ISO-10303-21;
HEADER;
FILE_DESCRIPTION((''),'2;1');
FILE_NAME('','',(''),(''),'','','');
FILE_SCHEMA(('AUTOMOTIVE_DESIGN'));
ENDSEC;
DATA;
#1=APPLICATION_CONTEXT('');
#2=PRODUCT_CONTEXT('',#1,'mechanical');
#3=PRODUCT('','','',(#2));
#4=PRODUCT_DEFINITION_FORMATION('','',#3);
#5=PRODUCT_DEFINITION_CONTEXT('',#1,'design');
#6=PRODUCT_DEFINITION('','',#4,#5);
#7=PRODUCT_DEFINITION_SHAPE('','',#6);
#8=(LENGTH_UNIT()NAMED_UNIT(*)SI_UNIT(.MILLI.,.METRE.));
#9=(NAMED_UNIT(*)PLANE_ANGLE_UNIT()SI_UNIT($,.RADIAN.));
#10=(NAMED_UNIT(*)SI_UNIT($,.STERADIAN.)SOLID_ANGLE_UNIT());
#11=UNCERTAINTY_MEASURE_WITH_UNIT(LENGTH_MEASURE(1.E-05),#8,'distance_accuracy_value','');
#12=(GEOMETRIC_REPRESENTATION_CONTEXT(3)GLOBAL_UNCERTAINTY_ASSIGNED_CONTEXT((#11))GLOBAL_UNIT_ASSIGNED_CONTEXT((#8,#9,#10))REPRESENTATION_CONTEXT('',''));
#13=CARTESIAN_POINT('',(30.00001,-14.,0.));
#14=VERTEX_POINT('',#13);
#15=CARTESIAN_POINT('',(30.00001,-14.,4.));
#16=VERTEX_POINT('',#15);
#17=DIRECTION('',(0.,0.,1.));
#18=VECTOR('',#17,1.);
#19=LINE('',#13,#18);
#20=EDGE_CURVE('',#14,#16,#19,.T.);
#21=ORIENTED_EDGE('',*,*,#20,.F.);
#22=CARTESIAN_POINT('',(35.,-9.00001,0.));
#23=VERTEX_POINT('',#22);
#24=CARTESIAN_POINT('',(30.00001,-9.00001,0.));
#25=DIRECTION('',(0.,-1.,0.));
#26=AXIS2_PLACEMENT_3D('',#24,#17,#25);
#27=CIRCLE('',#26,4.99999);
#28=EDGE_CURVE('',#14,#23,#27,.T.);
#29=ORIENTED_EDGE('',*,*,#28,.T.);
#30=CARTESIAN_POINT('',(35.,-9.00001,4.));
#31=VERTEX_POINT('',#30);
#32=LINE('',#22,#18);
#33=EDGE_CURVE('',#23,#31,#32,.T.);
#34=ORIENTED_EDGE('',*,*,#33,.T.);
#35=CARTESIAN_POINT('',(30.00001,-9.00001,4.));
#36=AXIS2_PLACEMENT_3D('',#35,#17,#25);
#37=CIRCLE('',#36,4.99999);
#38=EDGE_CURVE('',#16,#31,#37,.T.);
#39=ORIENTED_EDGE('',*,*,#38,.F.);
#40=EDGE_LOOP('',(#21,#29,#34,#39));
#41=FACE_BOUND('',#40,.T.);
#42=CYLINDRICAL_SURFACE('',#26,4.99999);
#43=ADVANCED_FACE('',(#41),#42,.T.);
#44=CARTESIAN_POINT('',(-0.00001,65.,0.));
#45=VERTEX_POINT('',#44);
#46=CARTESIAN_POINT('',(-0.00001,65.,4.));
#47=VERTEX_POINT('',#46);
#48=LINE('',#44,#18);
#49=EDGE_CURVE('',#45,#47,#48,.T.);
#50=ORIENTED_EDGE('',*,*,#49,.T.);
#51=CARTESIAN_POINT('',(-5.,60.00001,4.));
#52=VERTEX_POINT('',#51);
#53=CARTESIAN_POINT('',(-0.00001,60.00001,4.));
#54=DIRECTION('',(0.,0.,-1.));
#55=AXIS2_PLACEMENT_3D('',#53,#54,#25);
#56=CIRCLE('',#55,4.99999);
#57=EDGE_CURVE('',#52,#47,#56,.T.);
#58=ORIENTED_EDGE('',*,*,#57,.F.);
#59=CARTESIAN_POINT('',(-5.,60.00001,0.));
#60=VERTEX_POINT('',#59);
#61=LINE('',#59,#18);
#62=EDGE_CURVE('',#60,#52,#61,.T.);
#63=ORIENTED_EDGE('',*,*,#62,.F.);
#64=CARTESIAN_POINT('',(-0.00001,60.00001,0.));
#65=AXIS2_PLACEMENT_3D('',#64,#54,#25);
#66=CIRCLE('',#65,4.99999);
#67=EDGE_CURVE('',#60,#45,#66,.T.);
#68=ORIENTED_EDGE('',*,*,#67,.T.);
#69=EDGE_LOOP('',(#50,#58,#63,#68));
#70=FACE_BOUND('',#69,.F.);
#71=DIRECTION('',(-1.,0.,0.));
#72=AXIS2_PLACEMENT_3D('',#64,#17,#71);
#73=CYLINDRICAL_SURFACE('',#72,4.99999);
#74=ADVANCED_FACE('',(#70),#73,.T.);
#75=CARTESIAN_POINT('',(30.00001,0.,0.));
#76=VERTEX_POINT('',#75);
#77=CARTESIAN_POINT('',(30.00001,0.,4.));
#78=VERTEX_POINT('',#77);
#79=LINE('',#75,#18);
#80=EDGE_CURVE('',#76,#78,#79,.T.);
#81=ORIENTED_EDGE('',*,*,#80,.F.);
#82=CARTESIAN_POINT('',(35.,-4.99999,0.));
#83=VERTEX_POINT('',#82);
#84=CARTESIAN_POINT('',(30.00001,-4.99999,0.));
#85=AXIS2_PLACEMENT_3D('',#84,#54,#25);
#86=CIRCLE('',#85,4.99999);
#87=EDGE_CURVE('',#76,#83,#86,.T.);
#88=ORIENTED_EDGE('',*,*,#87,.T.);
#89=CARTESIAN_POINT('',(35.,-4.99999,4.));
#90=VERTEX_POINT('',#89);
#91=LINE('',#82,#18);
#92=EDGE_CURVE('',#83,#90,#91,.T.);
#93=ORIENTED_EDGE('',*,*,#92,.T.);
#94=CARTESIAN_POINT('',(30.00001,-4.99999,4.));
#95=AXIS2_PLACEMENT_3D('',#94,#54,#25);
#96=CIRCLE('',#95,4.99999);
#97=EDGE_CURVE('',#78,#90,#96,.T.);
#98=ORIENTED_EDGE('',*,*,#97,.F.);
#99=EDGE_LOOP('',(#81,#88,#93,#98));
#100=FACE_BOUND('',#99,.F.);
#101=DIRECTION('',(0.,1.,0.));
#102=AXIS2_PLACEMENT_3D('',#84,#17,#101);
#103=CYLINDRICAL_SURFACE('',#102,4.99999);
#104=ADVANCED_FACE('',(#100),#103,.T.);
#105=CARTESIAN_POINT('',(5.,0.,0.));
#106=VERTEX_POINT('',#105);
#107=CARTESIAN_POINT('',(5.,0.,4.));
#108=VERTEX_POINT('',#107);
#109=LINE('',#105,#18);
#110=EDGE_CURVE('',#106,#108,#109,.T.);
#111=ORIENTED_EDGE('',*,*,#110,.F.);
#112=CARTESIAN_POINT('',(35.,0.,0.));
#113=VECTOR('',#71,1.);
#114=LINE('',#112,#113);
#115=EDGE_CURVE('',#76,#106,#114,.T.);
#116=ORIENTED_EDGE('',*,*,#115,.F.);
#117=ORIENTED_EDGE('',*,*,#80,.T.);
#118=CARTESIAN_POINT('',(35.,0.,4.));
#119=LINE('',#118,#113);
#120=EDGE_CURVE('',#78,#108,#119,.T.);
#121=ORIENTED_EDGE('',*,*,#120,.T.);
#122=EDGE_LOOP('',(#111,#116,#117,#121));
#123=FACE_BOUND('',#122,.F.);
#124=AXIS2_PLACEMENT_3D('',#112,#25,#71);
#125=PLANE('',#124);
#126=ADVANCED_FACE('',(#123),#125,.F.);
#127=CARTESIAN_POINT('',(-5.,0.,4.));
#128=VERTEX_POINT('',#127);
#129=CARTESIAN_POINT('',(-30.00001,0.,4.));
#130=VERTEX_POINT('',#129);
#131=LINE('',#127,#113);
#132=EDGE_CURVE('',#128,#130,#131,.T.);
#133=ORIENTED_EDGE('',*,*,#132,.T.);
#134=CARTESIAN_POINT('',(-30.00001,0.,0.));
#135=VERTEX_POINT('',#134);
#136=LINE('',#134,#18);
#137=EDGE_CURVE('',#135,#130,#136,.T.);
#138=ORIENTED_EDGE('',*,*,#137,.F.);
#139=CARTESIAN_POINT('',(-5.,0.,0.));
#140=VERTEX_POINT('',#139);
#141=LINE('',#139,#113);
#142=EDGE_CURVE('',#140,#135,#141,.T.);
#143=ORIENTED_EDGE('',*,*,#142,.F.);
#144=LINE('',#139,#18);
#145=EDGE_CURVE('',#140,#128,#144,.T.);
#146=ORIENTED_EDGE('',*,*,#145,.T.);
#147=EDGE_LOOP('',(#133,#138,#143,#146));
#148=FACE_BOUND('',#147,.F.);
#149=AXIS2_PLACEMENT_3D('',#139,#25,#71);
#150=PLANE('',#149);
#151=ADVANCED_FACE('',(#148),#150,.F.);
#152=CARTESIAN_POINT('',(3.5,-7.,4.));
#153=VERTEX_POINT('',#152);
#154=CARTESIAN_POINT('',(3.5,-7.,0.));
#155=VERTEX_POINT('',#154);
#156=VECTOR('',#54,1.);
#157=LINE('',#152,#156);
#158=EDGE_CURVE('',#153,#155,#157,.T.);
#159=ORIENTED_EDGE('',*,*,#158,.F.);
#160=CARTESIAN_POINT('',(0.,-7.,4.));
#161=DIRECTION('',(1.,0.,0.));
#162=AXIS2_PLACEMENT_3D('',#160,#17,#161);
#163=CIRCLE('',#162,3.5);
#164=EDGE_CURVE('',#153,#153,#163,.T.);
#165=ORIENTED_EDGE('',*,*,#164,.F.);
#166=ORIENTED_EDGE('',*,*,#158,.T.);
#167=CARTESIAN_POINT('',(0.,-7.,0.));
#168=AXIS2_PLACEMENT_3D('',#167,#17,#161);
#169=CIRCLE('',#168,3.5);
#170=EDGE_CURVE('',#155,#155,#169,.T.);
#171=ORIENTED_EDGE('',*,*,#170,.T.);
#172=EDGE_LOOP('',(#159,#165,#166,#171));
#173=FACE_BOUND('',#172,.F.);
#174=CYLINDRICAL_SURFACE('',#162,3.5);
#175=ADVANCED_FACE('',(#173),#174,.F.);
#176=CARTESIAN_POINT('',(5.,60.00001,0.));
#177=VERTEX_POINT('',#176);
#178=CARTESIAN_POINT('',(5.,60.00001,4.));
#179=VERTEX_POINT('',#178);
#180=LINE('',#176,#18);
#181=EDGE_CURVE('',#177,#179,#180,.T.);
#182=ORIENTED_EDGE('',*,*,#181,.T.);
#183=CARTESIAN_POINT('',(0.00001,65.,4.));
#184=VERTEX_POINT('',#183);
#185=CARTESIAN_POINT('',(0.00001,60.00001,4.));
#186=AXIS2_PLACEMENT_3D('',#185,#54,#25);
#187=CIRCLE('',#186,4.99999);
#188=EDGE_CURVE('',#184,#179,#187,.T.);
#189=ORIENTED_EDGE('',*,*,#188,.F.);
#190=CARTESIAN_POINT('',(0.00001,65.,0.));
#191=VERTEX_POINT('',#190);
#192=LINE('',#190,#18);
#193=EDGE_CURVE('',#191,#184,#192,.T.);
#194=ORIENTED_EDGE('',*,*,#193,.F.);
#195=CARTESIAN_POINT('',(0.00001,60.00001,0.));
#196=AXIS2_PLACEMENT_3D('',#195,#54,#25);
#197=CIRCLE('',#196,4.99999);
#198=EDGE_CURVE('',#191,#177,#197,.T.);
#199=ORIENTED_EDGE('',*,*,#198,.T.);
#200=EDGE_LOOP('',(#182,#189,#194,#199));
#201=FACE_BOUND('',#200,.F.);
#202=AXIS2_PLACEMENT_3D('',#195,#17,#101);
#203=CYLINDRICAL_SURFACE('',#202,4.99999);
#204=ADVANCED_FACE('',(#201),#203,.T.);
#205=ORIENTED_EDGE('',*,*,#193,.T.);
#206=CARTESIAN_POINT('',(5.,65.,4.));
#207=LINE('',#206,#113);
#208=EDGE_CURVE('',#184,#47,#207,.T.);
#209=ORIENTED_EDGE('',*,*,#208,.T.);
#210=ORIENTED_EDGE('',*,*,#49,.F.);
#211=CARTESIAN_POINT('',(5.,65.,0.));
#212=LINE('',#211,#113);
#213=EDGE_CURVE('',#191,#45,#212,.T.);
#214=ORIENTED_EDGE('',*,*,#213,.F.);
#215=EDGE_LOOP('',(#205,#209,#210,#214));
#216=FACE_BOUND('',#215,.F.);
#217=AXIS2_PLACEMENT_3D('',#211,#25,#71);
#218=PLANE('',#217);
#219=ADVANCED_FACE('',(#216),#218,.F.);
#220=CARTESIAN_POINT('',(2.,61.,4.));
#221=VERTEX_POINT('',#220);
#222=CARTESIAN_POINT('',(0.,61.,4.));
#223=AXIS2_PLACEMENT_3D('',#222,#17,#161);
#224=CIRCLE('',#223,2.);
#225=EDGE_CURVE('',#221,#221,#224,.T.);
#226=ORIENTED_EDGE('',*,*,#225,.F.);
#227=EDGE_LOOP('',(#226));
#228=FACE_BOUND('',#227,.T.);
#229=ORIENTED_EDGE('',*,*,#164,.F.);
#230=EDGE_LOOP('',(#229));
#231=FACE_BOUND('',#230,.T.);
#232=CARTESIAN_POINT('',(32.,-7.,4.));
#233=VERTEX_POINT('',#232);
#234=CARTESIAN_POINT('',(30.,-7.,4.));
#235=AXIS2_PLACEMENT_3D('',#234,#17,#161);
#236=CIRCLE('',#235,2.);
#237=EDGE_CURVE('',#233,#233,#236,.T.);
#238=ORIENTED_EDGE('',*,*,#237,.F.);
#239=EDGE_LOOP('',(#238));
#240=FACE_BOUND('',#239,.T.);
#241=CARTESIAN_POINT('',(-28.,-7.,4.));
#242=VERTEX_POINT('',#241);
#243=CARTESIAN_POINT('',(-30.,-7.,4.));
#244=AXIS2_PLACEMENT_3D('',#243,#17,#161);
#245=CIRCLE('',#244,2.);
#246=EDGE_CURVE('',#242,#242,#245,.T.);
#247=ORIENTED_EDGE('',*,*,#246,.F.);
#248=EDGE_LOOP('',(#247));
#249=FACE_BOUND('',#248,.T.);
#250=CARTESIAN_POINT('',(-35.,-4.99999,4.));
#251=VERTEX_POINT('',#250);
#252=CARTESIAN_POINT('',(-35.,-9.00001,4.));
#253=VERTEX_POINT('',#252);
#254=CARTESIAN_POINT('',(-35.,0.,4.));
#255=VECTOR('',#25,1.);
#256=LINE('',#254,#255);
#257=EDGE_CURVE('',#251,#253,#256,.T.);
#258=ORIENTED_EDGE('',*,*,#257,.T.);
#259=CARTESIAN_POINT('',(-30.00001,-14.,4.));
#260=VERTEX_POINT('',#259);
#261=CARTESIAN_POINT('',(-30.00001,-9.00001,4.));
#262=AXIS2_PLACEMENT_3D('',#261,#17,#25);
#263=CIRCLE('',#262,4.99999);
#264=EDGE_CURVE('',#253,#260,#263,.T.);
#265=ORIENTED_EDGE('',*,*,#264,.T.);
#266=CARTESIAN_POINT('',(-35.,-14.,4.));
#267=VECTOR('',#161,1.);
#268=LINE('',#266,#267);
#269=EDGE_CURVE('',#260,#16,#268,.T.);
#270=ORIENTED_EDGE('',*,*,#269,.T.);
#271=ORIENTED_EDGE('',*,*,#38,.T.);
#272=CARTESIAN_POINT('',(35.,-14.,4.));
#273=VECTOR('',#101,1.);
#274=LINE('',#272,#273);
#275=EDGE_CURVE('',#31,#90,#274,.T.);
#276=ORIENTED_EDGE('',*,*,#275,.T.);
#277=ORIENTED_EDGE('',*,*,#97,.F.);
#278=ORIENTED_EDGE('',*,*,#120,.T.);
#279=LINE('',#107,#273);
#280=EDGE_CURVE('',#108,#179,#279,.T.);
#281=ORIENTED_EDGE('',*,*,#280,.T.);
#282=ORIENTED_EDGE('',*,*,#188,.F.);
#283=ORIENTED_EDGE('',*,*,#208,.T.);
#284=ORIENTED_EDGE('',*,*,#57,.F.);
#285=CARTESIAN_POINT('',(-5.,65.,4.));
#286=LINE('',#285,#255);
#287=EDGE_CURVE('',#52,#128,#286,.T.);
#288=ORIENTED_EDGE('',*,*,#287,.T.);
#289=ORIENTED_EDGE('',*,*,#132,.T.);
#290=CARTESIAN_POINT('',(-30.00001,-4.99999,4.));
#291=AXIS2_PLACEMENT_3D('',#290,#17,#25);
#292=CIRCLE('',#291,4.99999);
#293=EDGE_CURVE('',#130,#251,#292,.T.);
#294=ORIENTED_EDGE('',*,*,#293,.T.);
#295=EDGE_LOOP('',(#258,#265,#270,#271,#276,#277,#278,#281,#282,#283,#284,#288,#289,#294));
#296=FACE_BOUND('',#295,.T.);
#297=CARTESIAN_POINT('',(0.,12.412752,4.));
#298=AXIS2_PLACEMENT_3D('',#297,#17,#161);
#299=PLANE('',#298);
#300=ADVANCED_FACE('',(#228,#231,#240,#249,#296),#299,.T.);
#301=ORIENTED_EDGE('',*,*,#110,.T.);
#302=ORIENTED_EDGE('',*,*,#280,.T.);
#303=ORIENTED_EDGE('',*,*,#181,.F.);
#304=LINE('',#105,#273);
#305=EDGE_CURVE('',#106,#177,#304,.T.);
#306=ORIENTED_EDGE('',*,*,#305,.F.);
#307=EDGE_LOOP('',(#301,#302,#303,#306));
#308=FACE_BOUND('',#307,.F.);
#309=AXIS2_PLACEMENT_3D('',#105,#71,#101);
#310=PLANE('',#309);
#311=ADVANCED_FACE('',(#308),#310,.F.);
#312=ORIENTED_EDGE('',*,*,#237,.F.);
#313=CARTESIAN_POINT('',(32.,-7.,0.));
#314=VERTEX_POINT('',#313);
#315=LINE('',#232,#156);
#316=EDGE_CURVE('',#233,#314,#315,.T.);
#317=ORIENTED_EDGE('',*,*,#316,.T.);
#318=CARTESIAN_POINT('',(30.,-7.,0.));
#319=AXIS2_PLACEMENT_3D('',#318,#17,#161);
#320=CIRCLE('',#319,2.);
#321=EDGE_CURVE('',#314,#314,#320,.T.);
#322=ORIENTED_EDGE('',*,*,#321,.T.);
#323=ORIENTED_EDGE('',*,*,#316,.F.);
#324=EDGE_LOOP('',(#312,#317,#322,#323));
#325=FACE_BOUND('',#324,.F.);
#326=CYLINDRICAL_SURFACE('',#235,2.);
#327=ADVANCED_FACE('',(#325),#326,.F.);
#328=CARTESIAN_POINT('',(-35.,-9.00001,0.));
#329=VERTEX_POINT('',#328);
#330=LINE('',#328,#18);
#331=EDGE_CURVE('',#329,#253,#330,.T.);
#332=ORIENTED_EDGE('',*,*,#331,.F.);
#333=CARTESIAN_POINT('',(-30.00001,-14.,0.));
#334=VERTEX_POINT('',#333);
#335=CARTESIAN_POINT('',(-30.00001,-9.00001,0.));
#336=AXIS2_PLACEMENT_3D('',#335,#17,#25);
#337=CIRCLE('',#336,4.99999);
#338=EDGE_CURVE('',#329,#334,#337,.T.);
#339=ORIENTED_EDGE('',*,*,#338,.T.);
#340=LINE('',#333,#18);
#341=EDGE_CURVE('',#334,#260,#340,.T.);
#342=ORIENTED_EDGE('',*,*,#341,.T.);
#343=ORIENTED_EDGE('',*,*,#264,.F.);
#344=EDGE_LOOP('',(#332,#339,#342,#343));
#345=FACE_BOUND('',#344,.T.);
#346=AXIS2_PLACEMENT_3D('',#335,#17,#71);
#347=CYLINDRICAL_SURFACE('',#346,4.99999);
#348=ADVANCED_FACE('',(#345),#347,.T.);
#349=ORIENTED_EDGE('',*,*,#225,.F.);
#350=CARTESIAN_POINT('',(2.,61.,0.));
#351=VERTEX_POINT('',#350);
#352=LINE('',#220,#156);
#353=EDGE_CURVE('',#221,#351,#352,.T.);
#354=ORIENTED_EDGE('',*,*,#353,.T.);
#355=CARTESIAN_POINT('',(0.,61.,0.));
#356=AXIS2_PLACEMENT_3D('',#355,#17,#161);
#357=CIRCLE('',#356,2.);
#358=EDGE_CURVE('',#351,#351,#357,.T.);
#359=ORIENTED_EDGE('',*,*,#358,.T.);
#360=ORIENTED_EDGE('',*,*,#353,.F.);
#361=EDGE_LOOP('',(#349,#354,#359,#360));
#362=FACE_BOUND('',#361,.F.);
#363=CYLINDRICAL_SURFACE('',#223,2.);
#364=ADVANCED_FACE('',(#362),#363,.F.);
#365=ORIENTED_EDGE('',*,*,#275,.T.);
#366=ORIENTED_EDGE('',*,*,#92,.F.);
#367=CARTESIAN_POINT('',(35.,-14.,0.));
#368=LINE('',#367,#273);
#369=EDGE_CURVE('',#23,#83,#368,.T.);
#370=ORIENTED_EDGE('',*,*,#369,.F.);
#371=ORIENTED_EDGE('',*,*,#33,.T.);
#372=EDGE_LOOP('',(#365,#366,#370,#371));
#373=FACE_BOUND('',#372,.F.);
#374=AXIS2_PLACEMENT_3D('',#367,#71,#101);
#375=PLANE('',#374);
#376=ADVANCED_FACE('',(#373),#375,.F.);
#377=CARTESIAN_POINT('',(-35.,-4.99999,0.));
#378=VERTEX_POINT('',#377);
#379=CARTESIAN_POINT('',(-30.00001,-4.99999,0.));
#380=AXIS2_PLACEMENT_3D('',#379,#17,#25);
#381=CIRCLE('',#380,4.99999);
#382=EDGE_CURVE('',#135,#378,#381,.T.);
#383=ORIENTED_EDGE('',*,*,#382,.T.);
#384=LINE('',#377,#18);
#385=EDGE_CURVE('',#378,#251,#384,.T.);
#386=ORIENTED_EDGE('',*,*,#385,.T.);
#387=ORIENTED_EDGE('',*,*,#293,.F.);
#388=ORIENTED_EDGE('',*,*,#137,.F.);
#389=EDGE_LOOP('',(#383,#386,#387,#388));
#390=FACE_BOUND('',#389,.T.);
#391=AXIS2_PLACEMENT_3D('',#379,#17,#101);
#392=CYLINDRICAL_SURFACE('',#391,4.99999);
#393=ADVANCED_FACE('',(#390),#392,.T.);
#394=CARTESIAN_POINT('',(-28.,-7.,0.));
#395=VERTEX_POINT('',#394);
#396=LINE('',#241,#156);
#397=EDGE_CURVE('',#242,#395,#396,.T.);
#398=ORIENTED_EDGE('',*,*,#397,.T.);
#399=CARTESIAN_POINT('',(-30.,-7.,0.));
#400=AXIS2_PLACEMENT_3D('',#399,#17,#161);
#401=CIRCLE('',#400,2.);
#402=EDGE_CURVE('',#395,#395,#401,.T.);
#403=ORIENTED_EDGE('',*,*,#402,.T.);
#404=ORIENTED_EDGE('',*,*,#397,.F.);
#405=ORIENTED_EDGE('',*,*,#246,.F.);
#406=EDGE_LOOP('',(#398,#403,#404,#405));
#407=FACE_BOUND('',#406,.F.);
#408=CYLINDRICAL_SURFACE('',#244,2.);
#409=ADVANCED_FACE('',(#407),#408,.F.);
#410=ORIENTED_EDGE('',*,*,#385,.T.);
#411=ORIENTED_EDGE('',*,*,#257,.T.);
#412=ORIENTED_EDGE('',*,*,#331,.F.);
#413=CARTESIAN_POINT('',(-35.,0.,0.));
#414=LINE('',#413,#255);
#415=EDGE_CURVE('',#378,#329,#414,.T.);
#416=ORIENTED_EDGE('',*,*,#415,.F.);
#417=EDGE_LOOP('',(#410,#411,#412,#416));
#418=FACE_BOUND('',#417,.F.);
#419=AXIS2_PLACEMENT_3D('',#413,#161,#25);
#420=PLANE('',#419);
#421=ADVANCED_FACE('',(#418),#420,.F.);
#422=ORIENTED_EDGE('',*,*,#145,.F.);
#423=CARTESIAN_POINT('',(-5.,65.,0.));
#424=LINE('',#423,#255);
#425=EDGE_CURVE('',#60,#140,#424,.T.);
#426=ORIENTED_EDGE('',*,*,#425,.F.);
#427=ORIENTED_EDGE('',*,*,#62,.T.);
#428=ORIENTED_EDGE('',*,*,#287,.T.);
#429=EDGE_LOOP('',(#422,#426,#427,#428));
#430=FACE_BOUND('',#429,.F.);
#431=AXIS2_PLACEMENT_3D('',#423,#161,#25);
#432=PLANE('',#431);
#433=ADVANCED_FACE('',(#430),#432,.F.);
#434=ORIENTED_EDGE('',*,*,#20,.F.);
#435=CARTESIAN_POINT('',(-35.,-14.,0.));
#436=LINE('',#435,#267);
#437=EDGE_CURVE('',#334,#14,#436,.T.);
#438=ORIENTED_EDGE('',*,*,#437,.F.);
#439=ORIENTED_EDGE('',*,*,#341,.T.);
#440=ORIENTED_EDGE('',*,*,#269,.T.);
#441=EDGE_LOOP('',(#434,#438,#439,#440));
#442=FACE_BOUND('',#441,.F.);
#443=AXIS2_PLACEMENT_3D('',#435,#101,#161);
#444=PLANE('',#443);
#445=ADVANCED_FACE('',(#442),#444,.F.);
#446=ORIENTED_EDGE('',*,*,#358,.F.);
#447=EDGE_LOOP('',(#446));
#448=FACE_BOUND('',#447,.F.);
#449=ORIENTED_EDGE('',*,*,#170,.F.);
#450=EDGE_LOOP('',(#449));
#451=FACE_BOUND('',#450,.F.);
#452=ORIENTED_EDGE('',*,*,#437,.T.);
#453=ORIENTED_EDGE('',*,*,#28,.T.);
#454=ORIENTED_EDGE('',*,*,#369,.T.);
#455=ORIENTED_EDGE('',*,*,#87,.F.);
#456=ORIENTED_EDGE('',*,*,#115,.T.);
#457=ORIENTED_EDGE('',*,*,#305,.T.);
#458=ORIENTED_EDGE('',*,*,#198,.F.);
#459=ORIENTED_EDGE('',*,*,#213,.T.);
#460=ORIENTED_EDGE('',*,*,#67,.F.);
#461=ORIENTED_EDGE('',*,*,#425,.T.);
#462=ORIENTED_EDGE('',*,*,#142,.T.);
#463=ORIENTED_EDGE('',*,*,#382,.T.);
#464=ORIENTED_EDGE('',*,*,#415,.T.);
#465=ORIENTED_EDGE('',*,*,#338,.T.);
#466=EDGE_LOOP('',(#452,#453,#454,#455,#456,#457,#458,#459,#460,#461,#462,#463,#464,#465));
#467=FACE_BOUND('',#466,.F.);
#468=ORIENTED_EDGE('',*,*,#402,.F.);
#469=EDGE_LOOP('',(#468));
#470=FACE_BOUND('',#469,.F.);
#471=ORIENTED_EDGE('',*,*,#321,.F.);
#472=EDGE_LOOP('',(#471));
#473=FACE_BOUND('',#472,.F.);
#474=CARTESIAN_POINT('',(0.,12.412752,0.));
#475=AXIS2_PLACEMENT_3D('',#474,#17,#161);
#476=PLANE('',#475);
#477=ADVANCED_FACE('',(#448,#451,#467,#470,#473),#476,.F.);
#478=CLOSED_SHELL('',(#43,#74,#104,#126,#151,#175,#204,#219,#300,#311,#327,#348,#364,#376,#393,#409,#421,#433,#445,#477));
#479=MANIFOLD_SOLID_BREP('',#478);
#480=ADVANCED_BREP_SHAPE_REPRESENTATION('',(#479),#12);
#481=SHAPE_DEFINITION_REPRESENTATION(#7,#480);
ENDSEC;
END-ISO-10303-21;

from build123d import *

# Parameters (mm, degrees)
F1_DEPTH = 4
F2_R     = 2
F2_R_2   = 3.5
F3_DEPTH = 25
F4_R     = 4.99999


# Not quite as in the source:
# - a fillet or chamfer is up to 0.001 mm smaller than in the source, because OpenCascade refuses the exact size


with BuildPart() as f1:
    # F0 (on Top) → F1 (new body)
    with BuildSketch(Plane.XY):
        Polygon((-5, 65), (-5, 0), (-35, 0), (-35, -14), (35, -14), (35, 0), (5, 0), (5, 65), align=None)
    extrude(amount=F1_DEPTH)

    # F2 (on face) → F3 (cut)
    with BuildSketch(Plane.XY.offset(4)):
        with Locations((-30, -7)):
            Circle(F2_R)
        with Locations((30, -7)):
            Circle(F2_R)
        with Locations((0, -7)):
            Circle(F2_R_2)
        with Locations((0, 61)):
            Circle(F2_R)
    extrude(amount=-F3_DEPTH, mode=Mode.SUBTRACT)

    # F4 (radius 5 in the source; OpenCascade refuses exactly that, so slightly less here)
    f4_edges = [f1.edges().sort_by_distance(p)[0] for p in [
        (-35, -14, 2),
        (-35, 0, 2),
        (35, -14, 2),
        (35, 0, 2),
        (5, 65, 2),
        (-5, 65, 2),
    ]]
    fillet(f4_edges, radius=F4_R)


solid = f1.part
